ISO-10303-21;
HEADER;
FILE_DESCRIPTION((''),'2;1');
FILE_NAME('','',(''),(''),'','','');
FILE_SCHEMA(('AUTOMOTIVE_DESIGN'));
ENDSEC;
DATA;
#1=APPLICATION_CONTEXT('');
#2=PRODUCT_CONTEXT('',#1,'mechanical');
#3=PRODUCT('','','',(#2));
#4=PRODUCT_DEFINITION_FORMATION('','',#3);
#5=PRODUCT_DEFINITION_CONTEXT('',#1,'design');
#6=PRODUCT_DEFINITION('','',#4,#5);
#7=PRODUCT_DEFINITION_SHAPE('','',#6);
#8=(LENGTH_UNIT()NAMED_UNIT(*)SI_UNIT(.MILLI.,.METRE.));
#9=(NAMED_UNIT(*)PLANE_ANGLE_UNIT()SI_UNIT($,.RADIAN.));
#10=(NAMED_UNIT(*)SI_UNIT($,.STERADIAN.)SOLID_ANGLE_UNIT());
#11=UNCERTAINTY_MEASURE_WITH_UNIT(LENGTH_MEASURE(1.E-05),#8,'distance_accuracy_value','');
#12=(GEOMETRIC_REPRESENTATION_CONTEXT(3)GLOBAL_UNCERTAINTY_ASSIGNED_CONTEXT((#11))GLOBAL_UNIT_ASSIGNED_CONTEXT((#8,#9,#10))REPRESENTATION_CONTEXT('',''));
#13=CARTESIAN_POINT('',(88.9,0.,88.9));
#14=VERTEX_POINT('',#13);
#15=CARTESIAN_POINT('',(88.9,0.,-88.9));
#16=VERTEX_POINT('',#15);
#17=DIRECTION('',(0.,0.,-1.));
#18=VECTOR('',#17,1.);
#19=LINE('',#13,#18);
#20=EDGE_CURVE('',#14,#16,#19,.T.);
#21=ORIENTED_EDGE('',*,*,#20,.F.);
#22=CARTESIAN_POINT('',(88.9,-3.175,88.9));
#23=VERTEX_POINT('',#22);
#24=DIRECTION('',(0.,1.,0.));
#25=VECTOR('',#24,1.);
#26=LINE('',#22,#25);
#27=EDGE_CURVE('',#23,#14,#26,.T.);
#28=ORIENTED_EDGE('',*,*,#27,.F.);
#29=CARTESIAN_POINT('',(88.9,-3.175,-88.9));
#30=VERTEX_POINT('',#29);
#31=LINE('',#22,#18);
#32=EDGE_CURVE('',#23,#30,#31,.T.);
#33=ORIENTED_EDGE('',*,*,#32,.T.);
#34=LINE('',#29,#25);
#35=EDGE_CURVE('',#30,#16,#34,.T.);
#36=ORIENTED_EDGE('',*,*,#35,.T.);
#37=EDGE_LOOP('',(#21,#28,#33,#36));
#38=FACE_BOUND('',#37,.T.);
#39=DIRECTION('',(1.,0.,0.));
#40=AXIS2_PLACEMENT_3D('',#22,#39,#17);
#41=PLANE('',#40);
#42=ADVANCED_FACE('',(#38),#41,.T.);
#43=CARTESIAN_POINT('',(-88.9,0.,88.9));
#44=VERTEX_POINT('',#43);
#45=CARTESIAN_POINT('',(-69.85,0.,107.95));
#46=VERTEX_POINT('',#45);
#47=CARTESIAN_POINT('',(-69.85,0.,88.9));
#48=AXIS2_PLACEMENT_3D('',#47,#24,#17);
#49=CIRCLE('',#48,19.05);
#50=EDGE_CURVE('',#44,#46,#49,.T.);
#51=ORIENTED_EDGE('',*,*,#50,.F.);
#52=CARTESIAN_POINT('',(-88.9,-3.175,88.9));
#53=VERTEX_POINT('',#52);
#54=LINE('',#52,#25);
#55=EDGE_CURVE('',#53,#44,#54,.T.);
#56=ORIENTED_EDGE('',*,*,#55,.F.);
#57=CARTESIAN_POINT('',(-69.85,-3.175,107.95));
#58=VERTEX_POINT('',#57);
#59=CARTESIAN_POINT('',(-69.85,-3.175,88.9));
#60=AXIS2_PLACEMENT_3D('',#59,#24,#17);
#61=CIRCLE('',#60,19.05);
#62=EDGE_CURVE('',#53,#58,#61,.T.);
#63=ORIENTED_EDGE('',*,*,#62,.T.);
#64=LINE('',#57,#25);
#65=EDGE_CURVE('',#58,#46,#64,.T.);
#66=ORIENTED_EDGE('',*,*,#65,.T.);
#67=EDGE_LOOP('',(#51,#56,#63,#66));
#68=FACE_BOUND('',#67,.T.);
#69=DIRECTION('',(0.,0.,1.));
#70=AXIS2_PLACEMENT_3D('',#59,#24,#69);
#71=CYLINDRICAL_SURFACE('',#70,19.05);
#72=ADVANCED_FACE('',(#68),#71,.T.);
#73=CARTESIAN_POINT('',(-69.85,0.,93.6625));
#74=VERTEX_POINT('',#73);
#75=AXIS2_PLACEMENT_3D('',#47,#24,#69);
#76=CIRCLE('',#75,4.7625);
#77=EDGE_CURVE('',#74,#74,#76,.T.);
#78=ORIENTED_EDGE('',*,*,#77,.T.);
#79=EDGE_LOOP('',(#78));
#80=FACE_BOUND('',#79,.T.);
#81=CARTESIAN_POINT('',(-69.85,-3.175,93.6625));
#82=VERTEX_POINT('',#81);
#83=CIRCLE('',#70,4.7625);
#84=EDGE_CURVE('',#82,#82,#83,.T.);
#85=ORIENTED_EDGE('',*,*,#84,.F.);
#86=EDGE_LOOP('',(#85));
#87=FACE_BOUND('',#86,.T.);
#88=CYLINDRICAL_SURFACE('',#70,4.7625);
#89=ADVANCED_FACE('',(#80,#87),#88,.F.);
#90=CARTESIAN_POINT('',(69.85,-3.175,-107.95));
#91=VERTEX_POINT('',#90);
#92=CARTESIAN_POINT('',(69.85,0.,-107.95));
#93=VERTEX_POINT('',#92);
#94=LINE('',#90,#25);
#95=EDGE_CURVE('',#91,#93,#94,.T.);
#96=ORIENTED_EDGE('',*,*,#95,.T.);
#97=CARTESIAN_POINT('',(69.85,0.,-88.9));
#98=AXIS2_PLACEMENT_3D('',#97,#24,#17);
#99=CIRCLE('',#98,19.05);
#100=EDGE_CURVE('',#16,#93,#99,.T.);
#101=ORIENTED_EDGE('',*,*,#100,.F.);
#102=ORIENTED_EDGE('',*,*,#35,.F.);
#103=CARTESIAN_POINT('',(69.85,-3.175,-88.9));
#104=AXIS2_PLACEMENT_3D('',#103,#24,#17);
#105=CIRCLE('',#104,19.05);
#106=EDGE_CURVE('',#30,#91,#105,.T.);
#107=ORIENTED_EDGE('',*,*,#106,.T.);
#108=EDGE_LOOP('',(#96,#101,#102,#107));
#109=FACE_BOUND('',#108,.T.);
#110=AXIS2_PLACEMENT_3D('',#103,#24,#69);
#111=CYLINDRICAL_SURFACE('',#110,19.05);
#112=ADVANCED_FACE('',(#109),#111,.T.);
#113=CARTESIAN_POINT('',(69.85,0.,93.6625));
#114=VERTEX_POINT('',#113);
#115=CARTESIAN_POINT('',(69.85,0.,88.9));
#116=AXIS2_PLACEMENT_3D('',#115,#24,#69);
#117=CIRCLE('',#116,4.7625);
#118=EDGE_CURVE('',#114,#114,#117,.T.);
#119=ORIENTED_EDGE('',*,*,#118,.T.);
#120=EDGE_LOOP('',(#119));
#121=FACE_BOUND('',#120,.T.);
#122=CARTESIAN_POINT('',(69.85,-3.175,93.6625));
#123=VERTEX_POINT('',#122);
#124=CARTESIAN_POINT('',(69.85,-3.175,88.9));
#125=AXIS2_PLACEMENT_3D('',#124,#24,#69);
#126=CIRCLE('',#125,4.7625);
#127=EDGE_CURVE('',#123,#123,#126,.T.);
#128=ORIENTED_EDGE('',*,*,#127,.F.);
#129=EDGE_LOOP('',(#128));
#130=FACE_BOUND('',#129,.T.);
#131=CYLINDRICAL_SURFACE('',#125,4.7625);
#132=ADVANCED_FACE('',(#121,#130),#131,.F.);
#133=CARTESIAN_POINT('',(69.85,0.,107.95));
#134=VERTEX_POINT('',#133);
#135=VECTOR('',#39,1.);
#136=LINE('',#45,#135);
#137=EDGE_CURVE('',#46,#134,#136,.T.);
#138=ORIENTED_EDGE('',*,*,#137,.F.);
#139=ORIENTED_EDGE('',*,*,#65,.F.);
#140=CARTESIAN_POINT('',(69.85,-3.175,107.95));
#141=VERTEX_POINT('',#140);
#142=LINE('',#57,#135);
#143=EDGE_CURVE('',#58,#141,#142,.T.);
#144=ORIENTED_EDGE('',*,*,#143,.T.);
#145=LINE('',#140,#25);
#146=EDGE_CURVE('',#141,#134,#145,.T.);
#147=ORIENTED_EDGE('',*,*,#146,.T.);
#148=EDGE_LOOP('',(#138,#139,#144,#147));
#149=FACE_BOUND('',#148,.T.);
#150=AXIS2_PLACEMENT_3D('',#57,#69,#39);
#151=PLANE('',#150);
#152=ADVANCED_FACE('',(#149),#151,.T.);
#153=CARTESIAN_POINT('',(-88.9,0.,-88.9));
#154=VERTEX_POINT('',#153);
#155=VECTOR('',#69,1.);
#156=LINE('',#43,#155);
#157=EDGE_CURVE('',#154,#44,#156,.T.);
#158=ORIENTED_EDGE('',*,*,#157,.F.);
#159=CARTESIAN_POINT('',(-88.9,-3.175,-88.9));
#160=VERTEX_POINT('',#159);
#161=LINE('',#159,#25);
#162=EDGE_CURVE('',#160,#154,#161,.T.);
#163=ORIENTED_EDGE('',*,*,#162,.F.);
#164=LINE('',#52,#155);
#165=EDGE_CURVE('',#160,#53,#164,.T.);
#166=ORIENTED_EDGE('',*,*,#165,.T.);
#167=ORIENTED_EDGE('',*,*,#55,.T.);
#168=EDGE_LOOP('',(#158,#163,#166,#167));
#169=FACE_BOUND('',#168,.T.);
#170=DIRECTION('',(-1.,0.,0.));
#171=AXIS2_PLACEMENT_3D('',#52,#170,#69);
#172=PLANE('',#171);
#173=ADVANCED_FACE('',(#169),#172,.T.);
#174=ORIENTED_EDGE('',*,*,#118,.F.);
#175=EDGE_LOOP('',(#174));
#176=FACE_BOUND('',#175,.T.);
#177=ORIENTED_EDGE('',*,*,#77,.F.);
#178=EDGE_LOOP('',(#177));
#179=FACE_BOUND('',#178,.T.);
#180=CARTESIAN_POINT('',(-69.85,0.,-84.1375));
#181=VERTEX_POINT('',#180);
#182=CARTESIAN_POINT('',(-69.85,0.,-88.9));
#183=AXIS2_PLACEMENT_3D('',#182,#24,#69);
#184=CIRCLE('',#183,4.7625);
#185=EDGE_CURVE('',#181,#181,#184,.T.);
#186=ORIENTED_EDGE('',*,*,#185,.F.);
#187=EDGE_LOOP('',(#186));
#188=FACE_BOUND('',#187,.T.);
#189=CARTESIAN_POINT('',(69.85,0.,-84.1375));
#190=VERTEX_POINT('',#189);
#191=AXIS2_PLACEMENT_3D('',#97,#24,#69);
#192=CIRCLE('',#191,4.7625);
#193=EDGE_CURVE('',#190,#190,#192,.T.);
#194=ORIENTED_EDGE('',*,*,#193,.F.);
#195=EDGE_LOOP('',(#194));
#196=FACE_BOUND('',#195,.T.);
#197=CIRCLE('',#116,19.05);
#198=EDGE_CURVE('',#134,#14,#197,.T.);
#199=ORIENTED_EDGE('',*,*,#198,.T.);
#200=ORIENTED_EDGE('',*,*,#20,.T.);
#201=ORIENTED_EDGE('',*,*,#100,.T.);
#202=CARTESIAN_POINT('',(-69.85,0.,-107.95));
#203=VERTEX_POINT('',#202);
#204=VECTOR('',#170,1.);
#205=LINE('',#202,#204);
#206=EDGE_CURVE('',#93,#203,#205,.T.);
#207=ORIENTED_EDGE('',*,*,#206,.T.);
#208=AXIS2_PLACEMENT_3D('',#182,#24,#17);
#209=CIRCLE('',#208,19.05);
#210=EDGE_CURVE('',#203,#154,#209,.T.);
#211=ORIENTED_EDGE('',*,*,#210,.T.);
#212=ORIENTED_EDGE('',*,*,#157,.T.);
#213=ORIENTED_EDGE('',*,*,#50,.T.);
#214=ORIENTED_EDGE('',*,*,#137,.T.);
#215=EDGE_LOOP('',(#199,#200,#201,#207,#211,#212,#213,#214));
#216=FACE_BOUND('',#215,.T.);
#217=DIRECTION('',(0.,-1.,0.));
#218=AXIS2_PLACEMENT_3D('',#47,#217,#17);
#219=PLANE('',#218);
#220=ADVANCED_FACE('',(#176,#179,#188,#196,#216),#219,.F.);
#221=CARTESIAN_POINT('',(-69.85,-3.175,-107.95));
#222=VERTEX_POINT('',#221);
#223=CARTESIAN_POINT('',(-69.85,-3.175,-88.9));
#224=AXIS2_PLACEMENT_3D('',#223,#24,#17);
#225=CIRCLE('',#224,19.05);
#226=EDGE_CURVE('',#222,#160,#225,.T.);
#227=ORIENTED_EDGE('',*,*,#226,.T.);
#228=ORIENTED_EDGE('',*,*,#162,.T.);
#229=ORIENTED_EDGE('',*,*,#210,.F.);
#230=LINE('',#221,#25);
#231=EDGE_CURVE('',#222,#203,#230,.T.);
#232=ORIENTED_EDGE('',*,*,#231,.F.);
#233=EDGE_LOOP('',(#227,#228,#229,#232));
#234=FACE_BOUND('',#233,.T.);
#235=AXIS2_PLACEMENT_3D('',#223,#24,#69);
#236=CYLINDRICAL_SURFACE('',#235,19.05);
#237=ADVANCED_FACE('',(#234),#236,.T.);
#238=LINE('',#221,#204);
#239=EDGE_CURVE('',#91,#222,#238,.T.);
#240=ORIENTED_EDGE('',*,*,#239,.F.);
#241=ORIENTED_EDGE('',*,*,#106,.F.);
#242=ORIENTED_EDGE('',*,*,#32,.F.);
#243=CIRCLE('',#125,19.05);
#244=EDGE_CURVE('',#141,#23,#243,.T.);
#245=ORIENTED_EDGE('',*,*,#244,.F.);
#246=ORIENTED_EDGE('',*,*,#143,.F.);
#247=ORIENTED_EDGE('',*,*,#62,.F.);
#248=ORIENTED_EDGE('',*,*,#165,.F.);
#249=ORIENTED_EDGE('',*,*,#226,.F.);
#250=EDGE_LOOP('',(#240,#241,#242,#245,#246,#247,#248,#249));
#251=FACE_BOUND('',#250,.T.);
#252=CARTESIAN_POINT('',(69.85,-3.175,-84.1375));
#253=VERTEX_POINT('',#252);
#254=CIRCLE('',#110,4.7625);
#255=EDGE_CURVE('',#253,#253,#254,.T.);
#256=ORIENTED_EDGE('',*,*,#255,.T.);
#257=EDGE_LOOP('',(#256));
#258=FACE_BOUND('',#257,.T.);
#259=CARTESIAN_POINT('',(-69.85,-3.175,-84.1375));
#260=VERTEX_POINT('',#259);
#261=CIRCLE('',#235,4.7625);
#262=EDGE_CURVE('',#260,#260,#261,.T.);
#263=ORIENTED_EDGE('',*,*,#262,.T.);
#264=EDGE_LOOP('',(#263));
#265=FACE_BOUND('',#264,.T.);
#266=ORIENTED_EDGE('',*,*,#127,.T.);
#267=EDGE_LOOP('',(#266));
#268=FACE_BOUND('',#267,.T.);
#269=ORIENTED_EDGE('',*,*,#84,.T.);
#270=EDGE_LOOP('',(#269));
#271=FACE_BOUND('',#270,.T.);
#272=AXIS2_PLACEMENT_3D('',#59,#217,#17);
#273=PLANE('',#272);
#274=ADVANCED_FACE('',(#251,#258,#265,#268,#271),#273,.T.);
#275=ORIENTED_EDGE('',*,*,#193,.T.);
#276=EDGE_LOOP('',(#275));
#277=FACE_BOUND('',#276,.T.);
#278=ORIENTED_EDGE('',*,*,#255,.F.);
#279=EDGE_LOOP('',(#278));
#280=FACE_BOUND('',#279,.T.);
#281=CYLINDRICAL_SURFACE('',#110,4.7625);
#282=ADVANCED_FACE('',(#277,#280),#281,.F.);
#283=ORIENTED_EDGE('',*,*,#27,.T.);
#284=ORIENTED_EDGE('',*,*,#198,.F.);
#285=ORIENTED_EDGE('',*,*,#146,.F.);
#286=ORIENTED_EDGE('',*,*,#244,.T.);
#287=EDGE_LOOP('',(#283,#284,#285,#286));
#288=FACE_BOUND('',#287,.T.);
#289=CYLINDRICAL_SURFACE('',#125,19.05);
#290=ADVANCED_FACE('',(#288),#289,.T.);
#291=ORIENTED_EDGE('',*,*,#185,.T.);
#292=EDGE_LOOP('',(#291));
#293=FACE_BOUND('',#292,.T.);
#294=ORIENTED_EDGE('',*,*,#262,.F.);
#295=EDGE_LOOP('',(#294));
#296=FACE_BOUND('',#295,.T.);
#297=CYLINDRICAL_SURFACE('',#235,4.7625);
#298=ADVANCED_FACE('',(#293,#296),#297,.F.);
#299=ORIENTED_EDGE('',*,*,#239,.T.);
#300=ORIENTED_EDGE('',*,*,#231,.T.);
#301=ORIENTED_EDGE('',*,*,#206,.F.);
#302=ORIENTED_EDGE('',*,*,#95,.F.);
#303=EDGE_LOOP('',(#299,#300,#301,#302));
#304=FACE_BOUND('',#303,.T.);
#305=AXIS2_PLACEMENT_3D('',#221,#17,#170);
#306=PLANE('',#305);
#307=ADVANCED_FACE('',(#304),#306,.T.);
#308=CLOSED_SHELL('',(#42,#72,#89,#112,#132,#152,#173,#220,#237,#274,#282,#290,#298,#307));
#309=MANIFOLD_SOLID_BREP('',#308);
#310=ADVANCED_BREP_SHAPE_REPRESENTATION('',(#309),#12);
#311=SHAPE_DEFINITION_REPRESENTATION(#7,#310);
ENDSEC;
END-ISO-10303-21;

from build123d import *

# Parameters (mm, degrees)
BASE_FLANGE1_DEPTH = 3.175
SKETCH6_R          = 4.7625
CUT_EXTRUDE1_DEPTH = 140.880281402


# Sheet-metal steps are written as plain solids
with BuildPart() as part:
    # Sketch1 → Base-Flange1 (new body)
    with BuildSketch(Plane(origin=(0, 0, 0), x_dir=(1, 0, 0), z_dir=(0, 1, 0))):
        with BuildLine():
            Line((-69.85, -107.95), (69.85, -107.95))
            ThreePointArc((69.85, -107.95), (83.320384182, -102.370384182), (88.9, -88.9))
            Line((88.9, -88.9), (88.9, 88.9))
            ThreePointArc((88.9, 88.9), (83.320384182, 102.370384182), (69.85, 107.95))
            Line((69.85, 107.95), (-69.85, 107.95))
            ThreePointArc((-69.85, 107.95), (-83.320384182, 102.370384182), (-88.9, 88.9))
            Line((-88.9, 88.9), (-88.9, -88.9))
            ThreePointArc((-88.9, -88.9), (-83.320384182, -102.370384182), (-69.85, -107.95))
        make_face()
    extrude(amount=-BASE_FLANGE1_DEPTH)

    # Sketch6 → Cut-Extrude1 (cut, through all)
    with BuildSketch(Plane(origin=(0, 0, 0), x_dir=(1, 0, 0), z_dir=(0, 1, 0))):
        with Locations(Location((-69.85, -88.9, 0), (0, 0, 270))):
            Circle(SKETCH6_R)
        with Locations(Location((69.85, -88.9, 0), (0, 0, 270))):
            Circle(SKETCH6_R)
        with Locations(Location((69.85, 88.9, 0), (0, 0, 270))):
            Circle(SKETCH6_R)
        with Locations(Location((-69.85, 88.9, 0), (0, 0, 270))):
            Circle(SKETCH6_R)
    extrude(amount=-CUT_EXTRUDE1_DEPTH, mode=Mode.SUBTRACT)


solid = part.part
